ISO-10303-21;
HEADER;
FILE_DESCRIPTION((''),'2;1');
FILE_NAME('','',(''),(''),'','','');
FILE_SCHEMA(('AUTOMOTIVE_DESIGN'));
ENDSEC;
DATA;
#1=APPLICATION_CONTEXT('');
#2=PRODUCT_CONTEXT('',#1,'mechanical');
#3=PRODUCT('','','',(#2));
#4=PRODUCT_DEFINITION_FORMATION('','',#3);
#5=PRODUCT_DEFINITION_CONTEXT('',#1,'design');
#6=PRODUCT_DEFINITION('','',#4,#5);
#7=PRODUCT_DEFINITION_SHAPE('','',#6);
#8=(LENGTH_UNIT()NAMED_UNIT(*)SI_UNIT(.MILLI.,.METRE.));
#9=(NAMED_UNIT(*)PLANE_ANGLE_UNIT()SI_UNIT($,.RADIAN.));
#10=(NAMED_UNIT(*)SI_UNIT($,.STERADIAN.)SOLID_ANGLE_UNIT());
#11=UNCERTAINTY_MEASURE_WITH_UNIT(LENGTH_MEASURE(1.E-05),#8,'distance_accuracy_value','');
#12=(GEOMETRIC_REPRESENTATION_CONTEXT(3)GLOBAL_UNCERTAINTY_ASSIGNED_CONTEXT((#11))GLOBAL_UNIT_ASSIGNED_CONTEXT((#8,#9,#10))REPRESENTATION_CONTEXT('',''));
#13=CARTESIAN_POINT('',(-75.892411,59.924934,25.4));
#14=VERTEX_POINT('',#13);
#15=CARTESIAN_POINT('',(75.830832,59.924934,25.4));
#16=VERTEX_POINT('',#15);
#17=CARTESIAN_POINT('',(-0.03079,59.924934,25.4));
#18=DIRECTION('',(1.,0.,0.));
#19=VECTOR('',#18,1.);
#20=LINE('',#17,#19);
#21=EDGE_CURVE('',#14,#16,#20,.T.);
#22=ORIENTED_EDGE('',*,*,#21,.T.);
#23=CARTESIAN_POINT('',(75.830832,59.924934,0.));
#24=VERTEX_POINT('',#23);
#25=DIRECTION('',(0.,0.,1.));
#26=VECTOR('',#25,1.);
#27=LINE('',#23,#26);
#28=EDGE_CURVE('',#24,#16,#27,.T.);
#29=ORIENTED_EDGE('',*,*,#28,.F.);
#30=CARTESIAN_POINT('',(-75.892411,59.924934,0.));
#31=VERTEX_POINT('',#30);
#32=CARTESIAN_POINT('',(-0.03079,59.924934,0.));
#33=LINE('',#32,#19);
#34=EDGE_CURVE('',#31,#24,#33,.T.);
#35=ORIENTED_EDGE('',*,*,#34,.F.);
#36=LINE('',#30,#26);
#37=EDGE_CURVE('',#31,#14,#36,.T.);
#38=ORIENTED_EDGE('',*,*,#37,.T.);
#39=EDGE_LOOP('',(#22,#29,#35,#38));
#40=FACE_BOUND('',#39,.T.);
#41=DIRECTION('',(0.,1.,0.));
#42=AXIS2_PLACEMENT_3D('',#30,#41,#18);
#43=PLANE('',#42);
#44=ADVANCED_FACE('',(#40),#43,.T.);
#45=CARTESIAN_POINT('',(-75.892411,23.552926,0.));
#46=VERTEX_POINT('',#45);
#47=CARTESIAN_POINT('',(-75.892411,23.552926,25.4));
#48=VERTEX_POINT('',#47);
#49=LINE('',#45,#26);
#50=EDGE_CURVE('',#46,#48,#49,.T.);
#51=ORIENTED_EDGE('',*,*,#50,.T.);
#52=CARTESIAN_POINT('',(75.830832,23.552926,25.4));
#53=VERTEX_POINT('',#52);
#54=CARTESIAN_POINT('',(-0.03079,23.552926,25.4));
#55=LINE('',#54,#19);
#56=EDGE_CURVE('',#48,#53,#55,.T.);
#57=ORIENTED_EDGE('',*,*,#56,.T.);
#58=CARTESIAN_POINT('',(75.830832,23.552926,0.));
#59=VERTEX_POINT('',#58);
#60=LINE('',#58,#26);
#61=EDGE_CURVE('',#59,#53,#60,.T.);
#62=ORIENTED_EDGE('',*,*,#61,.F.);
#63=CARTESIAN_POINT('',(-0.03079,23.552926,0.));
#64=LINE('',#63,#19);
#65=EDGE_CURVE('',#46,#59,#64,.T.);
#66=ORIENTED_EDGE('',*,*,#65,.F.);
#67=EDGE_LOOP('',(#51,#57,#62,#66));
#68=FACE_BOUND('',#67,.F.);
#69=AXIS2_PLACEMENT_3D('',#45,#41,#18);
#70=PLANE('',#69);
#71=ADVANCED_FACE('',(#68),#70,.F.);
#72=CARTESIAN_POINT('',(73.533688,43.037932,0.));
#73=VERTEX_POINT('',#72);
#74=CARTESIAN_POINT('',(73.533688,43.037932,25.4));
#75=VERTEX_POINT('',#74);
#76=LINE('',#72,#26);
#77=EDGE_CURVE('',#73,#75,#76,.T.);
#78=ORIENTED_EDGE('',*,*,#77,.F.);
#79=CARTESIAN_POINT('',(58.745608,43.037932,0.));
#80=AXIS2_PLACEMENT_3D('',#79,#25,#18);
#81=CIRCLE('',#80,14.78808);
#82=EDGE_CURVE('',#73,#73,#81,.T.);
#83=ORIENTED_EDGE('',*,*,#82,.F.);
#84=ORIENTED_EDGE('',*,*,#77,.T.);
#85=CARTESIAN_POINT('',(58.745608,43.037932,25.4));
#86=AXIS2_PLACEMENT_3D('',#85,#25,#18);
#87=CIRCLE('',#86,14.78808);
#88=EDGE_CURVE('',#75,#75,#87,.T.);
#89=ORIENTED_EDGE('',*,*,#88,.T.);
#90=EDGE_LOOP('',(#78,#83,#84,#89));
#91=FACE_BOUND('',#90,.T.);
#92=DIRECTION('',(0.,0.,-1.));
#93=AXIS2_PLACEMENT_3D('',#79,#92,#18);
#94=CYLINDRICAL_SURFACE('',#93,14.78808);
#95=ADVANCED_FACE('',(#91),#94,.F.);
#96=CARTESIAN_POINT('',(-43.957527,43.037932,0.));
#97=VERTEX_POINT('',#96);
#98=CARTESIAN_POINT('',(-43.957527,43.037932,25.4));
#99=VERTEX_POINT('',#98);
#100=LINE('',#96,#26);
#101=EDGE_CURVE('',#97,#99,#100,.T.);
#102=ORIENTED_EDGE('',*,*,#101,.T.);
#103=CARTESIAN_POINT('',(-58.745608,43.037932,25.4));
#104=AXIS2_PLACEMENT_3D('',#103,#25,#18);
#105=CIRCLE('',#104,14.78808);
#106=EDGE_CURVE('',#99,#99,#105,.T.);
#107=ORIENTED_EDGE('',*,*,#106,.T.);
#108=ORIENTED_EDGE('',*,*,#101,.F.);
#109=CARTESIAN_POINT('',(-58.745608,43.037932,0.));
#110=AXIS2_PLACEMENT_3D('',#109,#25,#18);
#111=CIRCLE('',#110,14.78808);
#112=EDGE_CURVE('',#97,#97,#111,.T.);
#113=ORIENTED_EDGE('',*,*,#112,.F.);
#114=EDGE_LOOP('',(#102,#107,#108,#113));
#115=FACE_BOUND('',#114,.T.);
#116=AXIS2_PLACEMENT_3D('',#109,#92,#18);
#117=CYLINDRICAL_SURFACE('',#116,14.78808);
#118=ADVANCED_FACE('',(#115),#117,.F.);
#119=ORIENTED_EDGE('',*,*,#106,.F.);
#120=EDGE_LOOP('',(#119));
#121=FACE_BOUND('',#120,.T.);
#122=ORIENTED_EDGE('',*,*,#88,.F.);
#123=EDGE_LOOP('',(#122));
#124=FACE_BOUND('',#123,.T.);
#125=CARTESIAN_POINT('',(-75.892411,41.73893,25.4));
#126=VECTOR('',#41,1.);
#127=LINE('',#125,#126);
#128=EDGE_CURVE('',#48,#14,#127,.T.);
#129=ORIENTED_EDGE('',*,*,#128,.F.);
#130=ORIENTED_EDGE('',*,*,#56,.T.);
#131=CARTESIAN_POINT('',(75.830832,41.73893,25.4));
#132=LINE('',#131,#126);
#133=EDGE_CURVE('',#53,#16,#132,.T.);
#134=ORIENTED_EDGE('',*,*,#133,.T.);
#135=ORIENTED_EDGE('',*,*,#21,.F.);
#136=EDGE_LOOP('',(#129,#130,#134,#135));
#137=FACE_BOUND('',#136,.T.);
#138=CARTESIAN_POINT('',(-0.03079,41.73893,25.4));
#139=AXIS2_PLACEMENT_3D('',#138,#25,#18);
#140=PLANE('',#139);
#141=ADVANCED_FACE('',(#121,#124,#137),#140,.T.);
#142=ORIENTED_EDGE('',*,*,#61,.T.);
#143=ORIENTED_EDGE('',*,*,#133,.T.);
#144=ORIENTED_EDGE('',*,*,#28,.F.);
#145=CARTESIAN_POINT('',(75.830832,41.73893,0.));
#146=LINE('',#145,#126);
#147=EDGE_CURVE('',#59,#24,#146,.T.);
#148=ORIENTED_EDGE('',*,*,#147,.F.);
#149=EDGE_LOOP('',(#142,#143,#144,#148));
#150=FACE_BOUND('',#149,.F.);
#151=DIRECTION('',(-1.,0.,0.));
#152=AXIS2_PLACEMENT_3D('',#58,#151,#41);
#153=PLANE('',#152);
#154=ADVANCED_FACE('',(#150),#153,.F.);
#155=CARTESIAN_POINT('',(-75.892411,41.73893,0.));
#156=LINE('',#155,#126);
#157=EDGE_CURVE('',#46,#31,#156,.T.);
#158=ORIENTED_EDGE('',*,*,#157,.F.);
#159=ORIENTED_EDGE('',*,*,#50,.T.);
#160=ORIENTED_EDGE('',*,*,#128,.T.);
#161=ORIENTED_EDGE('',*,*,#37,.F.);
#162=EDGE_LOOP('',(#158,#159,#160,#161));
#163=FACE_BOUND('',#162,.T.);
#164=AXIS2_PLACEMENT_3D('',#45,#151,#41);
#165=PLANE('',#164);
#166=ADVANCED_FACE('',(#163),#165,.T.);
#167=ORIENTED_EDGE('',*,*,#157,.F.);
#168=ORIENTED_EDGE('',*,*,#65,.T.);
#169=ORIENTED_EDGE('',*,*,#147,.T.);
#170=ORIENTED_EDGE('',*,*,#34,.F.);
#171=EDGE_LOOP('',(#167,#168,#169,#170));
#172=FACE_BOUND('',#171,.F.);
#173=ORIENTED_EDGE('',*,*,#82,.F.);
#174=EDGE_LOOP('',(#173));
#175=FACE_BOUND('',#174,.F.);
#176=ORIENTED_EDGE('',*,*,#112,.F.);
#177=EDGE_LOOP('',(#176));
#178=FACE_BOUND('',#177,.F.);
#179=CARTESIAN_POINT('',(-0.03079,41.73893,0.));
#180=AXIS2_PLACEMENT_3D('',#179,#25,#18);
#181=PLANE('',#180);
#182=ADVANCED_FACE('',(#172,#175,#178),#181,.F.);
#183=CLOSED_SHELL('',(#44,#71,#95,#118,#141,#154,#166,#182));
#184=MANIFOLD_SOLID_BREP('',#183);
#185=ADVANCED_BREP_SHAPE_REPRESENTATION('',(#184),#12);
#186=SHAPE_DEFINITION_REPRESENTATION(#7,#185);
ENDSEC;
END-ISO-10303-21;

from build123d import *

# Parameters (mm, degrees)
F0_W     = 151.7232432961
F0_H     = 36.3720078021
F0_R     = 14.7880803575
F1_DEPTH = 25.4


# Not quite as in the source:
# - a feature names something its author has since deleted; it is built from what else it names


with BuildPart() as f1:
    # F0 (on Top) → F1 (new body)
    with BuildSketch(Plane.XY):
        with Locations((-0.0307895243, 41.7389301583)):
            Rectangle(F0_W, F0_H)
        with Locations((-58.7456077337, 43.0379323661)):
            Circle(F0_R, mode=Mode.SUBTRACT)
        with Locations((58.7456077337, 43.0379323661)):
            Circle(F0_R, mode=Mode.SUBTRACT)
    extrude(amount=F1_DEPTH)


solid = f1.part
